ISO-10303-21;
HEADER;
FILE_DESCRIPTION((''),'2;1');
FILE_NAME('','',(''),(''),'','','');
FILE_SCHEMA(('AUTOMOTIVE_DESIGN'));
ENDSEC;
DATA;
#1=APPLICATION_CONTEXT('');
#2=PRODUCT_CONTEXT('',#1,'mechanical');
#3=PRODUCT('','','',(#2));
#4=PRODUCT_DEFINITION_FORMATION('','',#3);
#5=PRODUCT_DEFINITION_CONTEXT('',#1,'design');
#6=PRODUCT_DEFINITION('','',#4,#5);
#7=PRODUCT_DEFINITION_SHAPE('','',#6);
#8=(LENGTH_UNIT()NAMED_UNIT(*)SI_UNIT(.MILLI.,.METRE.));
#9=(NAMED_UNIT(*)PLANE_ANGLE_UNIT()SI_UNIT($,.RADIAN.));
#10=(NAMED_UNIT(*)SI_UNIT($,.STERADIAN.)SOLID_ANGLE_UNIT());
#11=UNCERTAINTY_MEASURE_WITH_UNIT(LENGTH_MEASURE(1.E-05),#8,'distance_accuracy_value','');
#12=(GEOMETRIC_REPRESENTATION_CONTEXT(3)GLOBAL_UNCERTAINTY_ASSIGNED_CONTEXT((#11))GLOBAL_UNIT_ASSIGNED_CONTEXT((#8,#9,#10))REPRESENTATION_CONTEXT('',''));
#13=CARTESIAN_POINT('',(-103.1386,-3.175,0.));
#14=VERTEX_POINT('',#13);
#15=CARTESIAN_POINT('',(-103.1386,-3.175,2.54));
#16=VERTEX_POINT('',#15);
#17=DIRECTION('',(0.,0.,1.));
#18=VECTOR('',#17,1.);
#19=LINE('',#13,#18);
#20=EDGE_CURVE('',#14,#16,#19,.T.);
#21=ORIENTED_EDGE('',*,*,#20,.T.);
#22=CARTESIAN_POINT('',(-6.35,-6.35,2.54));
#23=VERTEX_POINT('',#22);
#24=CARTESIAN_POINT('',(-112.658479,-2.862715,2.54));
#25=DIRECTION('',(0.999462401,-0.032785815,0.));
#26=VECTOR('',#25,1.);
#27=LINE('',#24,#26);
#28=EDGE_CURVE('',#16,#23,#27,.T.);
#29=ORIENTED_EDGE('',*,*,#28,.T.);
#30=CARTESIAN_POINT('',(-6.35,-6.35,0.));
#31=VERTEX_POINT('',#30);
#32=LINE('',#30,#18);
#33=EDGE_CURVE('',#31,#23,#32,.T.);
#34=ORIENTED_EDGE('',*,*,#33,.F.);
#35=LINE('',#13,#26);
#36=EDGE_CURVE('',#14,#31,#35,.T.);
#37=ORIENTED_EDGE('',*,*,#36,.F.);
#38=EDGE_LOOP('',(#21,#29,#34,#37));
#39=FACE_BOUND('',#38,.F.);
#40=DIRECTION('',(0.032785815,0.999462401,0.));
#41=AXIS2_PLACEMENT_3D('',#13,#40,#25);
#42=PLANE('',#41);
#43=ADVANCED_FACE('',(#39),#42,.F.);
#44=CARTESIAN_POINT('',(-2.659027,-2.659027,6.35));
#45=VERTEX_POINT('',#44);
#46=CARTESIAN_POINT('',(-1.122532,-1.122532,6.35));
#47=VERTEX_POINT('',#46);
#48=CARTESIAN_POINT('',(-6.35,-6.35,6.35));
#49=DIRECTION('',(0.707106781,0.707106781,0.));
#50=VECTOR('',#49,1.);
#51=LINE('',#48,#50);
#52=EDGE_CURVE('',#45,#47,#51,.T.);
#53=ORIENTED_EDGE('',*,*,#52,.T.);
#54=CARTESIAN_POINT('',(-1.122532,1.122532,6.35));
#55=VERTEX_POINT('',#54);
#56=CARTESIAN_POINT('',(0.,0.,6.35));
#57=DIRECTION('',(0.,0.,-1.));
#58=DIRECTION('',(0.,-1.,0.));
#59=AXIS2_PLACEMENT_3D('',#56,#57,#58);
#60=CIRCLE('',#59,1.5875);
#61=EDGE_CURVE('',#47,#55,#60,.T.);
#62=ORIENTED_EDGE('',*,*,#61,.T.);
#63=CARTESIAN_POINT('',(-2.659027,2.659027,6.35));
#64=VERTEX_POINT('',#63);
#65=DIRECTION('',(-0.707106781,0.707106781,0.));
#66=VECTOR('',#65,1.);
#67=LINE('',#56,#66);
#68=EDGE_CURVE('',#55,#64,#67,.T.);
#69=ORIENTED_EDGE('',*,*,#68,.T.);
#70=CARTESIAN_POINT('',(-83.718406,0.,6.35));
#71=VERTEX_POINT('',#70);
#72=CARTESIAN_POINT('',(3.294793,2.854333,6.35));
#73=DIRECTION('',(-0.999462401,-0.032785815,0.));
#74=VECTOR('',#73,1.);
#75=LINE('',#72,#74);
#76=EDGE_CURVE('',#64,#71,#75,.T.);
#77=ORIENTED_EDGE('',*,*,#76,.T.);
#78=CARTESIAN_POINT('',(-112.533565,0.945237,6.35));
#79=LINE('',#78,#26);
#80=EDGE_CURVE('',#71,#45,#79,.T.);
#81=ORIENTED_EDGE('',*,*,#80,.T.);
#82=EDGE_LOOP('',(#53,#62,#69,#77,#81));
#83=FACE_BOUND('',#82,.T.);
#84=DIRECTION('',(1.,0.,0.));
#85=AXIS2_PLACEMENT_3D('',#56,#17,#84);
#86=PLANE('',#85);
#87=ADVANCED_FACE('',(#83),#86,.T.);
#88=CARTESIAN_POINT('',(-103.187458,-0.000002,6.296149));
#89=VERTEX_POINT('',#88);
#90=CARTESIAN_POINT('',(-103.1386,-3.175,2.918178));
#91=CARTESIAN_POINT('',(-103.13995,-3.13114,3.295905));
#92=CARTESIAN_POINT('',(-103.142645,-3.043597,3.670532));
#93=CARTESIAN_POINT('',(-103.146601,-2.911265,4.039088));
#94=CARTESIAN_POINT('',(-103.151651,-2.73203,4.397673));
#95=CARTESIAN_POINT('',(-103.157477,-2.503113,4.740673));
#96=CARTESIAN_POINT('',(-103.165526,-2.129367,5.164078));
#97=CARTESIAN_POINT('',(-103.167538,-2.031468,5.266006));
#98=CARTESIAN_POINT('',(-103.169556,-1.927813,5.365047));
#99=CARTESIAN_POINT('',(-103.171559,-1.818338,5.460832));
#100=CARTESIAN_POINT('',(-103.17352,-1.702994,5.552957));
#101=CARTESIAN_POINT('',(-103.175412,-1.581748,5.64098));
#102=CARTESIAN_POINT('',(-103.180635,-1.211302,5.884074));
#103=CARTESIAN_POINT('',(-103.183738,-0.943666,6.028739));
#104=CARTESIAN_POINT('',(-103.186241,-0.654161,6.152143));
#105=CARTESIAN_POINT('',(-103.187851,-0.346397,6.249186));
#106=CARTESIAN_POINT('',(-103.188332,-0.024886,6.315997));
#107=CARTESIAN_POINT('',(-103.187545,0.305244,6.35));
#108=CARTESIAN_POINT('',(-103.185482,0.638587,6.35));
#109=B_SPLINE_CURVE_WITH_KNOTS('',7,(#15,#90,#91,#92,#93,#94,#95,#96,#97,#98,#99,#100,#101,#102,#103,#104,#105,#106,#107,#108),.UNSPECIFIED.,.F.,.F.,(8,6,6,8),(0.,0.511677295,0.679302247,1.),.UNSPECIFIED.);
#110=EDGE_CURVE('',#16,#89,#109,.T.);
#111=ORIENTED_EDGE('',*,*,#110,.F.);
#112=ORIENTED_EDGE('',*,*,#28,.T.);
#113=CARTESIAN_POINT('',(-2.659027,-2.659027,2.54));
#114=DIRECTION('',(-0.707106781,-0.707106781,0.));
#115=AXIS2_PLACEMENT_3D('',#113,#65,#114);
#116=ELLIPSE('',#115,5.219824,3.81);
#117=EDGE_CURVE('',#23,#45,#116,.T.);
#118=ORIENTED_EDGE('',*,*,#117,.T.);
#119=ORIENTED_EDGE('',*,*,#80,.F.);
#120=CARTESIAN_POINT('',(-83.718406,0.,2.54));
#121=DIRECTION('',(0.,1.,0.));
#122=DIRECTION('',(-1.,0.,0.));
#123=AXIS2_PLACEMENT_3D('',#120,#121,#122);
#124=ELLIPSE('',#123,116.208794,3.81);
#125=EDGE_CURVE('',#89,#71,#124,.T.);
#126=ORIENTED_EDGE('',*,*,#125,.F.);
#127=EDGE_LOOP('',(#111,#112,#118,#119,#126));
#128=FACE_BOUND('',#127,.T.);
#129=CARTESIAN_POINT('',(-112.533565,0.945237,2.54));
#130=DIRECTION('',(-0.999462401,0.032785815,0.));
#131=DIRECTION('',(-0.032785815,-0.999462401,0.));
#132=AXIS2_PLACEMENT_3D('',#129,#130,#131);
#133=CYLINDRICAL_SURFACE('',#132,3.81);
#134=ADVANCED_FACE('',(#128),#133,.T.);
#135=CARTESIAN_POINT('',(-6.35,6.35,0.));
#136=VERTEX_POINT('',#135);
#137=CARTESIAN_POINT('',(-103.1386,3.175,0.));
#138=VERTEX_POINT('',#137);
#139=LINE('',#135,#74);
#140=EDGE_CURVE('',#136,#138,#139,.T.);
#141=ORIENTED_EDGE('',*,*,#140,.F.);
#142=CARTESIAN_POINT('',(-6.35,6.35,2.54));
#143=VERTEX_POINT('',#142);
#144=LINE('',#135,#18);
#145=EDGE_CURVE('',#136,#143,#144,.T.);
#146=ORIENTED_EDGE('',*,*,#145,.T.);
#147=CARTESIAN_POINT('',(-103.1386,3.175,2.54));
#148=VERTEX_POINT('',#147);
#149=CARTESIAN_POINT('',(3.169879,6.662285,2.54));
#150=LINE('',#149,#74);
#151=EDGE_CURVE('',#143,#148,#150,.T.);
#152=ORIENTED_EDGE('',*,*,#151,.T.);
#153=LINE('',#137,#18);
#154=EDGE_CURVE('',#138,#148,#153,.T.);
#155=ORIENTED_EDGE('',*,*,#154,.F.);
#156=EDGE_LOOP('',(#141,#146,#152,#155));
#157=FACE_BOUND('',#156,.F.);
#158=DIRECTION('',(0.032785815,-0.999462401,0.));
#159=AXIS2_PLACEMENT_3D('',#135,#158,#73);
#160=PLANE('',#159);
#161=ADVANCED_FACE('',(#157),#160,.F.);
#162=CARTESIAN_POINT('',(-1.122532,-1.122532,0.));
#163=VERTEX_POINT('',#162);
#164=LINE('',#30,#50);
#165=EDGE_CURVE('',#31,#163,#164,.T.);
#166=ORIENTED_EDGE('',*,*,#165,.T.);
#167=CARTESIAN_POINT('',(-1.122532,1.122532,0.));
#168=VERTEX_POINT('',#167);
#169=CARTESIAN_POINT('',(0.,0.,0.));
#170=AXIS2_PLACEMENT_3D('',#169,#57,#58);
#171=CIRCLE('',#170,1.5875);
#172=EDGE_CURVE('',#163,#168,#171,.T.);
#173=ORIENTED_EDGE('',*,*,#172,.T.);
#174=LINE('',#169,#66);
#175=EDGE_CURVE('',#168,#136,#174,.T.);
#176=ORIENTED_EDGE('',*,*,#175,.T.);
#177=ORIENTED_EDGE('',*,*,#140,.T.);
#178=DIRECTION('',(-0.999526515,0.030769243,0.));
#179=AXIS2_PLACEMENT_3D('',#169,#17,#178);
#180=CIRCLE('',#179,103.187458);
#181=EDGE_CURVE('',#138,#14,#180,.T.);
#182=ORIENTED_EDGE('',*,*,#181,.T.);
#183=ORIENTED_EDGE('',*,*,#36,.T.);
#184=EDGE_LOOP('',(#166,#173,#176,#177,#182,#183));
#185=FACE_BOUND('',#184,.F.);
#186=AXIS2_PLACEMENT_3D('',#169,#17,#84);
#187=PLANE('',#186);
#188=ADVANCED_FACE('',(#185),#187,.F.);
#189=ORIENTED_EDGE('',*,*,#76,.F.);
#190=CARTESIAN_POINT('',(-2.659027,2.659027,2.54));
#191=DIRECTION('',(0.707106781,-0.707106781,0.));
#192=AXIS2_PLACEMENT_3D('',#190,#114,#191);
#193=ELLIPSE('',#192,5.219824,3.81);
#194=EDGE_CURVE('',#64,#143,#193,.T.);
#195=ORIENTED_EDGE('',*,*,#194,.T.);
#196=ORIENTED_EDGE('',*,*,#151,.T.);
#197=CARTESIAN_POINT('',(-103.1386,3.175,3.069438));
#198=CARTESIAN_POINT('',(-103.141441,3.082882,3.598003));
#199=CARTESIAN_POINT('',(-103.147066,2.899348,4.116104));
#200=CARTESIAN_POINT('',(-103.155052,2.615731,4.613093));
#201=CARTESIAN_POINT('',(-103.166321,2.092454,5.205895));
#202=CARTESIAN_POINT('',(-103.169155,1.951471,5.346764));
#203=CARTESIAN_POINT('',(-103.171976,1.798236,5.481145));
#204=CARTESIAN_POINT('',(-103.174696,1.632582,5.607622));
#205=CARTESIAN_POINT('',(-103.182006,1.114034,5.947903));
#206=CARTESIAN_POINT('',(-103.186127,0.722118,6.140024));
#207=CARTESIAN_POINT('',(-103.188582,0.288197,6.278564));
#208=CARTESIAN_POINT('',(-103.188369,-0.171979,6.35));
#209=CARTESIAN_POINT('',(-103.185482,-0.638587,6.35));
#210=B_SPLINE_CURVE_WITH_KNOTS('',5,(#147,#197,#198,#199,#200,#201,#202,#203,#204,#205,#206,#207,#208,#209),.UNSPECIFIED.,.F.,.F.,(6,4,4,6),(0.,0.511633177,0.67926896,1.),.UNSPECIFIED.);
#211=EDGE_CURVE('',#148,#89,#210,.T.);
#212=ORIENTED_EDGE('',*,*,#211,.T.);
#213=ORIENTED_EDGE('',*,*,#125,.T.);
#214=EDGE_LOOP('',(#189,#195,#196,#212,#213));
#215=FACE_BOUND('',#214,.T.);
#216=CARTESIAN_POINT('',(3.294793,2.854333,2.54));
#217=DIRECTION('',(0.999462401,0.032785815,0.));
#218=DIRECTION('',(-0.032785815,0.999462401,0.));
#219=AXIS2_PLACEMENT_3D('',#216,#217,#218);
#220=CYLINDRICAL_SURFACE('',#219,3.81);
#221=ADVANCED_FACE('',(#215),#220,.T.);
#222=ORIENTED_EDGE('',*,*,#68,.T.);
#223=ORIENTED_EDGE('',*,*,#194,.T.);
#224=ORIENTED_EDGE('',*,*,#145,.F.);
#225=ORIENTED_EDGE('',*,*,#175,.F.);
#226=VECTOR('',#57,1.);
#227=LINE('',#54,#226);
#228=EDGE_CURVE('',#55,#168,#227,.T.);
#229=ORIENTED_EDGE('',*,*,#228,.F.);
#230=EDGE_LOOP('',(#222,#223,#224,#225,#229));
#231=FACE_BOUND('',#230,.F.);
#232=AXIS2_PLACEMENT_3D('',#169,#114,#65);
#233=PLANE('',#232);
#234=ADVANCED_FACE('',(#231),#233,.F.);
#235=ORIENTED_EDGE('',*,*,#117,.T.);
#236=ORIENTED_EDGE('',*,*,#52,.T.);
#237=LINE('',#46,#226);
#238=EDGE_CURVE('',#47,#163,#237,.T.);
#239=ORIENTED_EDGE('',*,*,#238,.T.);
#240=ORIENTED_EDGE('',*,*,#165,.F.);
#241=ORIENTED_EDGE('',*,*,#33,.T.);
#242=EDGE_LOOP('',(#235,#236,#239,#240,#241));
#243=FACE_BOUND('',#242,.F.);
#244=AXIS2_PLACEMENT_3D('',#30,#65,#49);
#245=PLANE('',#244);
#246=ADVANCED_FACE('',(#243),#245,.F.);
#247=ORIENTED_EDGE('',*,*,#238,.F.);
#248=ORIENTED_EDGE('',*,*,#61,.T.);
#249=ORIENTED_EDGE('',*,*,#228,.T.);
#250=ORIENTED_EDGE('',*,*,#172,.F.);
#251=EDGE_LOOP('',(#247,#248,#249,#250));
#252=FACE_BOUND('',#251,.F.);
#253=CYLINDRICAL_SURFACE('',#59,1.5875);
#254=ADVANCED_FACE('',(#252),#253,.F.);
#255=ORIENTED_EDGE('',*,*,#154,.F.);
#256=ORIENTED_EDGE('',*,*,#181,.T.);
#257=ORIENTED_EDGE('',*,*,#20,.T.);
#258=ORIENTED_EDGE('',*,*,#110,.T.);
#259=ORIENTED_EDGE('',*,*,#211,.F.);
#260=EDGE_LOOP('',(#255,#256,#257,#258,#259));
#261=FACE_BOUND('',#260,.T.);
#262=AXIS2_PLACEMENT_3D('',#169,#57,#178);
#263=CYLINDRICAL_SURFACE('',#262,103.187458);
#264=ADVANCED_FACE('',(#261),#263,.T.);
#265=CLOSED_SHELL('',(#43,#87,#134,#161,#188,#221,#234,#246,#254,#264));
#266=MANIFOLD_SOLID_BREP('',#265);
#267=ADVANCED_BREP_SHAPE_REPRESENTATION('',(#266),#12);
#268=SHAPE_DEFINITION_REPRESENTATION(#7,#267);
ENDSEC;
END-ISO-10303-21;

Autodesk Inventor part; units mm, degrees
ref_plane "YZ Plane" through (0, 0, 0) normal (1, 0, 0) x (0, 1, 0)
ref_plane "XZ Plane" through (0, 0, 0) normal (0, 1, 0) x (-1, 0, 0)
ref_plane "XY Plane" through (0, 0, 0) normal (0, 0, 1) x (1, 0, 0)
sketch "Sketch1" plane through (0, 0, 0) normal (0, 0, 1) x (1, 0, 0)
  line L0 (0, 0) -> (-6.35, 6.35)
  line L1 (-6.35, 6.35) -> (-103.1386, 3.175)
  line L2 (-103.1386, -3.175) -> (-6.35, -6.35)
  line L3 (-6.35, -6.35) -> (0, 0)
  arc A0 (-103.1386, 3.175) -> (-103.1386, -3.175) centre (0, 0) ccw
  line L4 (0, 0) -> (0.1245, 0) construction
  dimension "d1" = 6.35
  dimension "d3" = 6.35
  dimension "d10" = 135
  dimension "d11" = 103.1875
extrude "Extrusion1" add sketch "Sketch1" along normal blind 6.35
fillet "Fillet2" radius 3.81 2 edges at (-54.7443, -4.7625, 6.35) (-54.7443, 4.7625, 6.35)
hole "Hole1" at (0, 0, 6.35) direction (0, 0, -1) diameter 3.175 depth 25.4 tip angle 118
properties part number "Thrust_Support"
